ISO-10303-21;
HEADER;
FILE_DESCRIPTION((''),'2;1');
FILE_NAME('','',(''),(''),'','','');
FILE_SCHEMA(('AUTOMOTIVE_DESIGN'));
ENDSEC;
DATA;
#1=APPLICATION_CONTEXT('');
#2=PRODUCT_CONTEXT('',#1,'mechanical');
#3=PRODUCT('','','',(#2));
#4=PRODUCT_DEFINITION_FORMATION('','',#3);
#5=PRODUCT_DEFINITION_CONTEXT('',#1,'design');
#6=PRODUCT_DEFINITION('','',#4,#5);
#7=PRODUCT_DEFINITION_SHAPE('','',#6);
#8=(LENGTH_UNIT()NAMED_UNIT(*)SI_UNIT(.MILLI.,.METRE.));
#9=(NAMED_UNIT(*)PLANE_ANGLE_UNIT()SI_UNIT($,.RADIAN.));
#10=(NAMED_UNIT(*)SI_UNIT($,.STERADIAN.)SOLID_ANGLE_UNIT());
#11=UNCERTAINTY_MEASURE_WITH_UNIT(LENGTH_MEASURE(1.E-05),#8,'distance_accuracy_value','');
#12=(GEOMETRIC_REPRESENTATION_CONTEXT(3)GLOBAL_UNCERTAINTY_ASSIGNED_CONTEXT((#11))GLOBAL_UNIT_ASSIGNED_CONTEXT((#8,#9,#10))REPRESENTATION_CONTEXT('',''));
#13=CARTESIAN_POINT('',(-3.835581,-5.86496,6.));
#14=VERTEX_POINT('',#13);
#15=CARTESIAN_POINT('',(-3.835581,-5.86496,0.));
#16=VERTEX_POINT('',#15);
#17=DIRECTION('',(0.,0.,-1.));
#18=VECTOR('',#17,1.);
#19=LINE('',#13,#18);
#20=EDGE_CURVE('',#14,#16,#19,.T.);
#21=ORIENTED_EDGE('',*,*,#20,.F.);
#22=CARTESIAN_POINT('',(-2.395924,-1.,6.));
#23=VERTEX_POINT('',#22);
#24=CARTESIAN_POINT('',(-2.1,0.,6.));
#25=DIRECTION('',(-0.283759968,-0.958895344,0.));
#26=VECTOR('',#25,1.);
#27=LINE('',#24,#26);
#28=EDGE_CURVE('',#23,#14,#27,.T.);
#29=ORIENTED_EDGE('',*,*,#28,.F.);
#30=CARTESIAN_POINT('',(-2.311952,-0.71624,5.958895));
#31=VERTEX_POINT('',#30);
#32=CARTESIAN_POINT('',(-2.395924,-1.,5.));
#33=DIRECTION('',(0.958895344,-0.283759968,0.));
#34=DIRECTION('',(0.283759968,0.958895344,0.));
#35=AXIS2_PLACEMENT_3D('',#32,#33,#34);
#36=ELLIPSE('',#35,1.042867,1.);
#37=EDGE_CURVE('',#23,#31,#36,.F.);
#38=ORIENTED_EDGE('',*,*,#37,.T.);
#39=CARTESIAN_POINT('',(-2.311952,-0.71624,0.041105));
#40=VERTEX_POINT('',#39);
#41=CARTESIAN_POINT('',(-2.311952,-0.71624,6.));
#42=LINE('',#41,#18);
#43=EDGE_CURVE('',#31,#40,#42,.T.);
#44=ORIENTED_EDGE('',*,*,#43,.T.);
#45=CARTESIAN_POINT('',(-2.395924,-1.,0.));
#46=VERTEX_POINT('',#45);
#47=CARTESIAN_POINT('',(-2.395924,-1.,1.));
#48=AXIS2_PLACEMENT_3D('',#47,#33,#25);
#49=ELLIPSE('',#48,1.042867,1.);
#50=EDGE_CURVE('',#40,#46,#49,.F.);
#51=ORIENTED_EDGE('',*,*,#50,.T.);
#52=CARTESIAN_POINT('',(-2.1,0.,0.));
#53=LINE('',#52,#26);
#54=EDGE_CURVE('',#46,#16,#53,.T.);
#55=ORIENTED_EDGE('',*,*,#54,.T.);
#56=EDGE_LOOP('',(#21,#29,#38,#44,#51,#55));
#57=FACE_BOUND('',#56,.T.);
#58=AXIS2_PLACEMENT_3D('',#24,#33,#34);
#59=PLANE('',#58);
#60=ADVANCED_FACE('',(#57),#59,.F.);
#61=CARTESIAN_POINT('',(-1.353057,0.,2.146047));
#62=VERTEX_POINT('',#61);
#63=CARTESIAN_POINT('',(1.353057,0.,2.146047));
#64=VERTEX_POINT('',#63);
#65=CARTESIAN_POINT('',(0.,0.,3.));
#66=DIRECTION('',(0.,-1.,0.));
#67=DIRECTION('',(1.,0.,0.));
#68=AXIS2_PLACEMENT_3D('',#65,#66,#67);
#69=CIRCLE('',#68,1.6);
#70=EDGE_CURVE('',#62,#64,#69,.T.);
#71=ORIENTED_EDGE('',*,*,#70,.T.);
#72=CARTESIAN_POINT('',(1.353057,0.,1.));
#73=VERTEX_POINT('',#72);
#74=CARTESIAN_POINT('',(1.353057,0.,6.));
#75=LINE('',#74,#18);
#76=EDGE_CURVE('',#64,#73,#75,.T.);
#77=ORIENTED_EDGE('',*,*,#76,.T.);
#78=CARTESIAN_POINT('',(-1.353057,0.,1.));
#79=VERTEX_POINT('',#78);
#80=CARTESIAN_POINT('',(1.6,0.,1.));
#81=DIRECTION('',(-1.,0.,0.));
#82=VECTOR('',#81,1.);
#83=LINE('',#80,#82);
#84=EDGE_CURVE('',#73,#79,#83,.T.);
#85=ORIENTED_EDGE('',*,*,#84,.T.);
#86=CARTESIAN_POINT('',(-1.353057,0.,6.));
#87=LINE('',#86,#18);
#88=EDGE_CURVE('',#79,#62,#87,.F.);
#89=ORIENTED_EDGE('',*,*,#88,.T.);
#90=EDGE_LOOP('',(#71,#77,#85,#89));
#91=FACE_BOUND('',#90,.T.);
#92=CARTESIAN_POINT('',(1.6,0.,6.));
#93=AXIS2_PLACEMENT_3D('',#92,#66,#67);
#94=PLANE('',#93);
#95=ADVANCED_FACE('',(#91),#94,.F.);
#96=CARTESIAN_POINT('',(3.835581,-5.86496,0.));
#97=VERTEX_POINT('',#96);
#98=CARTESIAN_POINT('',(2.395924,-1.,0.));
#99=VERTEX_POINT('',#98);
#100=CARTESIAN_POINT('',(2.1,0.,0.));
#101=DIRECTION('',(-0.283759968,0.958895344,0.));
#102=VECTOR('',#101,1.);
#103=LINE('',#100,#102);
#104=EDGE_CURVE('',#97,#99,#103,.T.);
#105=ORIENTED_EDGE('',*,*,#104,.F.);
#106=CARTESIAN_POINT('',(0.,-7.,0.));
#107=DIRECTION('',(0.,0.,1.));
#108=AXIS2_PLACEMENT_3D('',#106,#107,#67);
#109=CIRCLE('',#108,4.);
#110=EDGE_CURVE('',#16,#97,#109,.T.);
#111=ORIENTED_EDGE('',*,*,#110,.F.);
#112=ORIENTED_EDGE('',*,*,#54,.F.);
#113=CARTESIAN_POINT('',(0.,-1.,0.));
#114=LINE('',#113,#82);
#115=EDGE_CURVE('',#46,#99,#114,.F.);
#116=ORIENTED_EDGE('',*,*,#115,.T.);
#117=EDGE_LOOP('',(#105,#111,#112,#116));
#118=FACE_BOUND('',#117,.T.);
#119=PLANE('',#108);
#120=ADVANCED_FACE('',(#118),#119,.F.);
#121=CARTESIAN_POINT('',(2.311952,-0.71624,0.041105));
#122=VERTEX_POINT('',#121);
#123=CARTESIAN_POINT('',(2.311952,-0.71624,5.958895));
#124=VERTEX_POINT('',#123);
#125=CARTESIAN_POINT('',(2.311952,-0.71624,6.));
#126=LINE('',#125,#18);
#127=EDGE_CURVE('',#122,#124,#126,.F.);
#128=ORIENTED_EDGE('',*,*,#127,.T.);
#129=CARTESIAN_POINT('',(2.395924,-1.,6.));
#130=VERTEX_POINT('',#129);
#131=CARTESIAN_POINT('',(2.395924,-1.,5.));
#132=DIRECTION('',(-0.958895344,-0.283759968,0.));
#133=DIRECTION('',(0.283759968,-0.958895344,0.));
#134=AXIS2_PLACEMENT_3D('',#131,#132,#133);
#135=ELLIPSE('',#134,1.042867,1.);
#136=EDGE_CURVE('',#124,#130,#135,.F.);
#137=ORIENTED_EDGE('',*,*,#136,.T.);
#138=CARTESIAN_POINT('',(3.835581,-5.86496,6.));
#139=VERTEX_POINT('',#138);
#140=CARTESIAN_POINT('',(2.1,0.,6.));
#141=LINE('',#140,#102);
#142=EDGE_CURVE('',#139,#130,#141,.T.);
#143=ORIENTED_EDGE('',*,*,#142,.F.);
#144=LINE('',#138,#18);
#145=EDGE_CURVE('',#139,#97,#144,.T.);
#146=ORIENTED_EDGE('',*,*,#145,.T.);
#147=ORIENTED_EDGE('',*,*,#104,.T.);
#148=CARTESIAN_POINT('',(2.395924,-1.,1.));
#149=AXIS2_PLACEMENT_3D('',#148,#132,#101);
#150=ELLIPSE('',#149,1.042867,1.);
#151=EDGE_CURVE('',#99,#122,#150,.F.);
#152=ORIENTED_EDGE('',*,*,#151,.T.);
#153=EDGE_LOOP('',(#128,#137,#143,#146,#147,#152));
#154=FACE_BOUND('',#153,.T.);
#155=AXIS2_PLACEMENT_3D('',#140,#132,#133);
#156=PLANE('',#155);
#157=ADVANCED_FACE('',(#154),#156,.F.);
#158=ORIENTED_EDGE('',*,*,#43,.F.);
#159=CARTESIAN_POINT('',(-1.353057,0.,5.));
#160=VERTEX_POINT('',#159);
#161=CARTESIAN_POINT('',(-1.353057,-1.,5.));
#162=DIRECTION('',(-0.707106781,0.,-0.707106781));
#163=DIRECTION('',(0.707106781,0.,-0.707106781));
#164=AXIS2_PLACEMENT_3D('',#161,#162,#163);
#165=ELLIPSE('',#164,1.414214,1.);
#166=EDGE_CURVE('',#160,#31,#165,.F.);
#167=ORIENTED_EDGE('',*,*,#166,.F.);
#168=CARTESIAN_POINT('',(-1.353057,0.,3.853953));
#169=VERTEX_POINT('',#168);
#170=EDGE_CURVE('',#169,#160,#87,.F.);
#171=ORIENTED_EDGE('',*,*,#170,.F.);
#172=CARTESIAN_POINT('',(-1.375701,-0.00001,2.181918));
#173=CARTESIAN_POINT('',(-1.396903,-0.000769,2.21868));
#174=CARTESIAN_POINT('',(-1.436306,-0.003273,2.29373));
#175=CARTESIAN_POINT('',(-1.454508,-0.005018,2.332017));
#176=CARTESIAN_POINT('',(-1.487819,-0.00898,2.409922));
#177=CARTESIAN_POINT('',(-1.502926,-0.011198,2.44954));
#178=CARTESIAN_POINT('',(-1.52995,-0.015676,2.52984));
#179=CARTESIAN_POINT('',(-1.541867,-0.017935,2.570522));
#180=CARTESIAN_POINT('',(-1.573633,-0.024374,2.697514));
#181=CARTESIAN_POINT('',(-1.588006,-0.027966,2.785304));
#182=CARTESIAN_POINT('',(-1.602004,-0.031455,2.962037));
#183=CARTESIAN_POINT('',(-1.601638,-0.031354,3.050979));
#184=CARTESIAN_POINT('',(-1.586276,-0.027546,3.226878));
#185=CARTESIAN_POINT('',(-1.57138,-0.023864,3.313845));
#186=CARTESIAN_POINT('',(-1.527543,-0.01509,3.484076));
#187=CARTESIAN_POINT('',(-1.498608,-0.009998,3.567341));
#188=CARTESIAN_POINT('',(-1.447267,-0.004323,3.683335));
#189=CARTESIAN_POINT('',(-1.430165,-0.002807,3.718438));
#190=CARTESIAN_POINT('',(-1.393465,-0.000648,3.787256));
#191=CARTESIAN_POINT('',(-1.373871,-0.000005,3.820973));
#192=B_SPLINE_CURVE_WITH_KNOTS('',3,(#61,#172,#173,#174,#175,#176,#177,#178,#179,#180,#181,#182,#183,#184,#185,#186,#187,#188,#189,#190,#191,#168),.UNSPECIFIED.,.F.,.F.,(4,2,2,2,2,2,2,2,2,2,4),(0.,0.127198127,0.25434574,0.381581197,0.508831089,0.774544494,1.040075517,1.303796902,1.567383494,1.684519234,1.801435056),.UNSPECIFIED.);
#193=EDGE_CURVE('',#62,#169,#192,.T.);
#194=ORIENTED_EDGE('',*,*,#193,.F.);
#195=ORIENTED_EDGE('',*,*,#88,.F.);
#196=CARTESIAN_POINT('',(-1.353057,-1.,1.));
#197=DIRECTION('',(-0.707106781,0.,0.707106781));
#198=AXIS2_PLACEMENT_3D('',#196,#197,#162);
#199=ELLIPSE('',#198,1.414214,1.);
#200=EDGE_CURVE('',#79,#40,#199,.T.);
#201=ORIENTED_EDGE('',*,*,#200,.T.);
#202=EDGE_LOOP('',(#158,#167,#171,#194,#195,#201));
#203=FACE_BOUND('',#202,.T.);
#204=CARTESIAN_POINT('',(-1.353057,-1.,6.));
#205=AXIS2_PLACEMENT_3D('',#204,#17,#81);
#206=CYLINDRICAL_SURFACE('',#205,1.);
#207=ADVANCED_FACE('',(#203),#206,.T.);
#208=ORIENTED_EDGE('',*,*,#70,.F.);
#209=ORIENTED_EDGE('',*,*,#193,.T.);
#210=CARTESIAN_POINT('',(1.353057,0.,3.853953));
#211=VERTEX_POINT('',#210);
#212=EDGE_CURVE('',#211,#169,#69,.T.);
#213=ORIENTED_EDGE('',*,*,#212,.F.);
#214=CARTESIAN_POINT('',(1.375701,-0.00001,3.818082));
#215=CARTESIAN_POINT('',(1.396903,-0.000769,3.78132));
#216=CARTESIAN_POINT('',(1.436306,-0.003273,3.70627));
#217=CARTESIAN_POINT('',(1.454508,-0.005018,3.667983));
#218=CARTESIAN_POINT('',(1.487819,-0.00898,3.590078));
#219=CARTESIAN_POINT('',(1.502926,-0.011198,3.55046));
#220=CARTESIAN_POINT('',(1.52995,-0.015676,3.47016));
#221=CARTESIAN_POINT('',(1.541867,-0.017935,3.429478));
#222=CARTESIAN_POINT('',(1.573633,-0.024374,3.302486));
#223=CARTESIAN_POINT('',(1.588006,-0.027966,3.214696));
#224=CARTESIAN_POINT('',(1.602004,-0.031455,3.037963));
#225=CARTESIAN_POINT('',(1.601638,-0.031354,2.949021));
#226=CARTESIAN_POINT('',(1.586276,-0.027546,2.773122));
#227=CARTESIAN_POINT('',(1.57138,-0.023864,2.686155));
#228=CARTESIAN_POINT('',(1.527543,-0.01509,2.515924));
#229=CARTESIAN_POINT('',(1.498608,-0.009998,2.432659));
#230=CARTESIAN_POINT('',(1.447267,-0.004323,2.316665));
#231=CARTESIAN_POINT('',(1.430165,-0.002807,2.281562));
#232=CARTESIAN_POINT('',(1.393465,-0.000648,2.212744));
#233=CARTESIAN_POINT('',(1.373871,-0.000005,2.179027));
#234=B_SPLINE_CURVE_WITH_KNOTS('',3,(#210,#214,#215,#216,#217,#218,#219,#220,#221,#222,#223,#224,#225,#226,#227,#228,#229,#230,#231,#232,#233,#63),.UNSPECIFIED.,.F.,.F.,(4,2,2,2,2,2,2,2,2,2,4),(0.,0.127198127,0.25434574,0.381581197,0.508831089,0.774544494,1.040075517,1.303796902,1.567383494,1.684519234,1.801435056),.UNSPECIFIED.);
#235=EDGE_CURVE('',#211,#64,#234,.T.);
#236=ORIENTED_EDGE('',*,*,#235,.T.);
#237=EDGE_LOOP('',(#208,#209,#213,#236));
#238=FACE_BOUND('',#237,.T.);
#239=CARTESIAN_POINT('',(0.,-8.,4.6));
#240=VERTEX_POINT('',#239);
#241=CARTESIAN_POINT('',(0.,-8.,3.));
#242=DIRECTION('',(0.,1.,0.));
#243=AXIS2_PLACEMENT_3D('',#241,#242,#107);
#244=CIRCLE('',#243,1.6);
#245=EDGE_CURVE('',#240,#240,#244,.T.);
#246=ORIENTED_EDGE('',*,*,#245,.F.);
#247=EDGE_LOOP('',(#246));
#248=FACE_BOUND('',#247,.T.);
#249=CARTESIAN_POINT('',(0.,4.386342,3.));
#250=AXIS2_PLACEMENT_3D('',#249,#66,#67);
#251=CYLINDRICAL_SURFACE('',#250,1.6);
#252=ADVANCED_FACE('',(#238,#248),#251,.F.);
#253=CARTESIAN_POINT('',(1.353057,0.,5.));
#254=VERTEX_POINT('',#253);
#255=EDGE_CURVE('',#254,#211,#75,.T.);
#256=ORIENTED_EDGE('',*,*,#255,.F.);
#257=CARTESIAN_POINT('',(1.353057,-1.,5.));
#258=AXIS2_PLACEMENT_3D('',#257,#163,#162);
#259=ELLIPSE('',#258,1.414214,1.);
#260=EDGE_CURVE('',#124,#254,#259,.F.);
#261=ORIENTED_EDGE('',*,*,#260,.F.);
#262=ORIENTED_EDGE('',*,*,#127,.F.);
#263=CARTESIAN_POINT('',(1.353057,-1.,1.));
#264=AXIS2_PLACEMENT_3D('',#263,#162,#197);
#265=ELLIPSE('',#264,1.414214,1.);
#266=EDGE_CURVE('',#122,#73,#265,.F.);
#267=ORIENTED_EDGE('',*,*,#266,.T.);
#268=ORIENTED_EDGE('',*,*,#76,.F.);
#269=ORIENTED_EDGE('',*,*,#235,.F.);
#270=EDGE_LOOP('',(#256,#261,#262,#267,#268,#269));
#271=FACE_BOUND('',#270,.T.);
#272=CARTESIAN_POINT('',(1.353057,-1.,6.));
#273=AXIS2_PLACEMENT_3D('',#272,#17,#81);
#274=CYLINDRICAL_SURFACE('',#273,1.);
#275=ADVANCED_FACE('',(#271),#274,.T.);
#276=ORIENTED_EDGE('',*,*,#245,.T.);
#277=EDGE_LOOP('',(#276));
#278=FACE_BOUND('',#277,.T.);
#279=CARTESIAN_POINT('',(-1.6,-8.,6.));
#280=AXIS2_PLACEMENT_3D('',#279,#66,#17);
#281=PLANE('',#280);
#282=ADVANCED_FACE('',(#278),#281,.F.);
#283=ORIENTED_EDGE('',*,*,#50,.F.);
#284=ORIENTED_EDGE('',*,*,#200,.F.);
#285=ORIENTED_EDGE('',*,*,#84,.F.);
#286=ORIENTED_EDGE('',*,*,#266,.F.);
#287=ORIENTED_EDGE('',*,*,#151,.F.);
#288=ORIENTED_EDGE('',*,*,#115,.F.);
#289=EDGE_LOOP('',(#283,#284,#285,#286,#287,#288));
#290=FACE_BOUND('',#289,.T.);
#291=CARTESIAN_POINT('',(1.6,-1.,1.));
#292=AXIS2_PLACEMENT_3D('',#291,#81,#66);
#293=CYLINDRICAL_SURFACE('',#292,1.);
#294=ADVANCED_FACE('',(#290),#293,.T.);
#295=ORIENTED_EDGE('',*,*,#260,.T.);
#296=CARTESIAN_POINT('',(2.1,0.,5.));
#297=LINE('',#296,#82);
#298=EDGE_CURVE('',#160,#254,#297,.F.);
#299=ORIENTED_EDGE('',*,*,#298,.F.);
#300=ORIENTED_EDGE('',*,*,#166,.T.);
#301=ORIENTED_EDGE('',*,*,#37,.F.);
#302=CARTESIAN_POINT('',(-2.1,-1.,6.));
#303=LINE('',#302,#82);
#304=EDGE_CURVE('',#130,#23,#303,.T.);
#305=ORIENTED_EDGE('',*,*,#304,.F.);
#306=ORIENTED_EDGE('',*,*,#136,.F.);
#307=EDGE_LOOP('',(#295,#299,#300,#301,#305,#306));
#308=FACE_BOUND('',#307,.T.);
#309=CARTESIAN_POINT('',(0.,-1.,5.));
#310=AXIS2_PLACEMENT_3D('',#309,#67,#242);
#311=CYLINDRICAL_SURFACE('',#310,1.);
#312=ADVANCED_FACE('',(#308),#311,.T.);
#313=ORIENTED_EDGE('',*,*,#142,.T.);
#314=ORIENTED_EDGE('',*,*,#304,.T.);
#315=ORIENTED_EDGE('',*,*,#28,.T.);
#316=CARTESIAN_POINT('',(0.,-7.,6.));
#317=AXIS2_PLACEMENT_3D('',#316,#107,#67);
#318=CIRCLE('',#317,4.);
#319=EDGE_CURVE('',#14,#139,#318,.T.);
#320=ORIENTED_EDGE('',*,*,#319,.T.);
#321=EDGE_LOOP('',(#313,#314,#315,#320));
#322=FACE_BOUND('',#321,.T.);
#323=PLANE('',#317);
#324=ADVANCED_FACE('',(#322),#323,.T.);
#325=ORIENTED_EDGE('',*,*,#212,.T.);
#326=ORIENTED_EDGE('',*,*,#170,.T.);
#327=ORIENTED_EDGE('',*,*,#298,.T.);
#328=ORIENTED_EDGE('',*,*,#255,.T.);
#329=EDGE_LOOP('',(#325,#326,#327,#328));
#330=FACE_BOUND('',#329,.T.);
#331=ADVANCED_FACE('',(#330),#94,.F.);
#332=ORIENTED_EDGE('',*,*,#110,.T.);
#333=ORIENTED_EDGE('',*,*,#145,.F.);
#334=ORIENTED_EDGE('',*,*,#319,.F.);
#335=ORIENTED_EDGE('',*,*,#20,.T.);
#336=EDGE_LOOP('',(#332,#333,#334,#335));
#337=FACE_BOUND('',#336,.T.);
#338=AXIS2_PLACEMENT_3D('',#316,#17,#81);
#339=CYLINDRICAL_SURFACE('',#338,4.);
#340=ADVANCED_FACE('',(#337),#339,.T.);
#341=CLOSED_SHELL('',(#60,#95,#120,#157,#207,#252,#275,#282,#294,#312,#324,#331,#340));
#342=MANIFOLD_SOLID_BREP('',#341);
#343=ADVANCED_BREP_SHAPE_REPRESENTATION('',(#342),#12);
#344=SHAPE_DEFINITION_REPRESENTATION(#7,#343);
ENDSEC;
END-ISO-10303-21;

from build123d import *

# Parameters (mm, degrees)
BOSS_EXTRUDE1_DEPTH = 6
BOSS_EXTRUDE2_DEPTH = 8
FILLET1_R           = 1


with BuildPart() as part:
    # Sketch1 → Boss-Extrude1 (new body)
    with BuildSketch(Plane.XY):
        with BuildLine():
            Line((-1.6, 0), (-2.1, 0))
            Line((-2.1, 0), (-3.835581375, -5.864960127))
            ThreePointArc((-3.835581375, -5.864960127), (0, -11), (3.835581375, -5.864960127))
            Line((3.835581375, -5.864960127), (2.1, 0))
            Line((2.1, 0), (1.6, 0))
            Line((1.6, 0), (1.6, -8))
            Line((1.6, -8), (0, -8))
            Line((0, -8), (-1.6, -8))
            Line((-1.6, -8), (-1.6, 0))
        make_face()
    extrude(amount=BOSS_EXTRUDE1_DEPTH)

    # Sketch2 → Boss-Extrude2 (add)
    with BuildSketch(Plane(origin=(0, -8, 0), x_dir=(1, 0, 0), z_dir=(0, 1, 0))):
        with BuildLine():
            Line((1.6, -6), (1.6, -3))
            ThreePointArc((1.6, -3), (0, -4.6), (-1.6, -3))
            Line((-1.6, -3), (-1.6, -6))
            Line((-1.6, -6), (1.6, -6))
        make_face()
        with BuildLine():
            Line((1.6, -3), (1.6, 0))
            Line((1.6, 0), (-1.6, 0))
            Line((-1.6, 0), (-1.6, -3))
            ThreePointArc((-1.6, -3), (0, -1.4), (1.6, -3))
        make_face()
    extrude(amount=BOSS_EXTRUDE2_DEPTH)

    # Fillet1
    # the kernel refuses this fillet: 1 mm, written as the material it takes off along each edge
    with BuildSketch(Plane(origin=(-4.6, 0, 0), x_dir=(0, 0, 1), z_dir=(1, 0, 0))) as fillet1_piece_1:
        with BuildLine():
            CenterArc((FILLET1_R, FILLET1_R), FILLET1_R, 180, 90)
            Line((0, FILLET1_R), (0, 0))
            Line((0, 0), (FILLET1_R, 0))
        make_face()
    extrude(amount=9.2, mode=Mode.SUBTRACT)
    with BuildSketch(Plane(origin=(2.1, 0, -1.867357153), x_dir=(-1, 0, 0), z_dir=(0, 0, 1))) as fillet1_piece_2:
        with BuildLine():
            CenterArc((FILLET1_R * 0.746942861214, FILLET1_R), FILLET1_R, 196.484740183, 73.515259817)
            Line((-FILLET1_R * 0.211952482607, FILLET1_R * 0.716240031718), (0, 0))
            Line((0, 0), (FILLET1_R * 0.746942861214, 0))
        make_face()
    extrude(amount=9.734714306, mode=Mode.SUBTRACT)
    with BuildSketch(Plane(origin=(-2.1, 0, -1.867357153), x_dir=(1, 0, 0), z_dir=(0, 0, 1))) as fillet1_piece_3:
        with BuildLine():
            CenterArc((FILLET1_R * 0.746942861214, -FILLET1_R), FILLET1_R, 90, 73.515259817)
            Line((-FILLET1_R * 0.211952482607, -FILLET1_R * 0.716240031718), (0, 0))
            Line((0, 0), (FILLET1_R * 0.746942861214, 0))
        make_face()
    extrude(amount=9.734714306, mode=Mode.SUBTRACT)
    with BuildSketch(Plane(origin=(4.6, 0, 6), x_dir=(0, -1, 0), z_dir=(-1, 0, 0))) as fillet1_piece_4:
        with BuildLine():
            CenterArc((FILLET1_R, -FILLET1_R), FILLET1_R, 90, 90)
            Line((0, -FILLET1_R), (0, 0))
            Line((0, 0), (FILLET1_R, 0))
        make_face()
    extrude(amount=9.2, mode=Mode.SUBTRACT)


solid = part.part
